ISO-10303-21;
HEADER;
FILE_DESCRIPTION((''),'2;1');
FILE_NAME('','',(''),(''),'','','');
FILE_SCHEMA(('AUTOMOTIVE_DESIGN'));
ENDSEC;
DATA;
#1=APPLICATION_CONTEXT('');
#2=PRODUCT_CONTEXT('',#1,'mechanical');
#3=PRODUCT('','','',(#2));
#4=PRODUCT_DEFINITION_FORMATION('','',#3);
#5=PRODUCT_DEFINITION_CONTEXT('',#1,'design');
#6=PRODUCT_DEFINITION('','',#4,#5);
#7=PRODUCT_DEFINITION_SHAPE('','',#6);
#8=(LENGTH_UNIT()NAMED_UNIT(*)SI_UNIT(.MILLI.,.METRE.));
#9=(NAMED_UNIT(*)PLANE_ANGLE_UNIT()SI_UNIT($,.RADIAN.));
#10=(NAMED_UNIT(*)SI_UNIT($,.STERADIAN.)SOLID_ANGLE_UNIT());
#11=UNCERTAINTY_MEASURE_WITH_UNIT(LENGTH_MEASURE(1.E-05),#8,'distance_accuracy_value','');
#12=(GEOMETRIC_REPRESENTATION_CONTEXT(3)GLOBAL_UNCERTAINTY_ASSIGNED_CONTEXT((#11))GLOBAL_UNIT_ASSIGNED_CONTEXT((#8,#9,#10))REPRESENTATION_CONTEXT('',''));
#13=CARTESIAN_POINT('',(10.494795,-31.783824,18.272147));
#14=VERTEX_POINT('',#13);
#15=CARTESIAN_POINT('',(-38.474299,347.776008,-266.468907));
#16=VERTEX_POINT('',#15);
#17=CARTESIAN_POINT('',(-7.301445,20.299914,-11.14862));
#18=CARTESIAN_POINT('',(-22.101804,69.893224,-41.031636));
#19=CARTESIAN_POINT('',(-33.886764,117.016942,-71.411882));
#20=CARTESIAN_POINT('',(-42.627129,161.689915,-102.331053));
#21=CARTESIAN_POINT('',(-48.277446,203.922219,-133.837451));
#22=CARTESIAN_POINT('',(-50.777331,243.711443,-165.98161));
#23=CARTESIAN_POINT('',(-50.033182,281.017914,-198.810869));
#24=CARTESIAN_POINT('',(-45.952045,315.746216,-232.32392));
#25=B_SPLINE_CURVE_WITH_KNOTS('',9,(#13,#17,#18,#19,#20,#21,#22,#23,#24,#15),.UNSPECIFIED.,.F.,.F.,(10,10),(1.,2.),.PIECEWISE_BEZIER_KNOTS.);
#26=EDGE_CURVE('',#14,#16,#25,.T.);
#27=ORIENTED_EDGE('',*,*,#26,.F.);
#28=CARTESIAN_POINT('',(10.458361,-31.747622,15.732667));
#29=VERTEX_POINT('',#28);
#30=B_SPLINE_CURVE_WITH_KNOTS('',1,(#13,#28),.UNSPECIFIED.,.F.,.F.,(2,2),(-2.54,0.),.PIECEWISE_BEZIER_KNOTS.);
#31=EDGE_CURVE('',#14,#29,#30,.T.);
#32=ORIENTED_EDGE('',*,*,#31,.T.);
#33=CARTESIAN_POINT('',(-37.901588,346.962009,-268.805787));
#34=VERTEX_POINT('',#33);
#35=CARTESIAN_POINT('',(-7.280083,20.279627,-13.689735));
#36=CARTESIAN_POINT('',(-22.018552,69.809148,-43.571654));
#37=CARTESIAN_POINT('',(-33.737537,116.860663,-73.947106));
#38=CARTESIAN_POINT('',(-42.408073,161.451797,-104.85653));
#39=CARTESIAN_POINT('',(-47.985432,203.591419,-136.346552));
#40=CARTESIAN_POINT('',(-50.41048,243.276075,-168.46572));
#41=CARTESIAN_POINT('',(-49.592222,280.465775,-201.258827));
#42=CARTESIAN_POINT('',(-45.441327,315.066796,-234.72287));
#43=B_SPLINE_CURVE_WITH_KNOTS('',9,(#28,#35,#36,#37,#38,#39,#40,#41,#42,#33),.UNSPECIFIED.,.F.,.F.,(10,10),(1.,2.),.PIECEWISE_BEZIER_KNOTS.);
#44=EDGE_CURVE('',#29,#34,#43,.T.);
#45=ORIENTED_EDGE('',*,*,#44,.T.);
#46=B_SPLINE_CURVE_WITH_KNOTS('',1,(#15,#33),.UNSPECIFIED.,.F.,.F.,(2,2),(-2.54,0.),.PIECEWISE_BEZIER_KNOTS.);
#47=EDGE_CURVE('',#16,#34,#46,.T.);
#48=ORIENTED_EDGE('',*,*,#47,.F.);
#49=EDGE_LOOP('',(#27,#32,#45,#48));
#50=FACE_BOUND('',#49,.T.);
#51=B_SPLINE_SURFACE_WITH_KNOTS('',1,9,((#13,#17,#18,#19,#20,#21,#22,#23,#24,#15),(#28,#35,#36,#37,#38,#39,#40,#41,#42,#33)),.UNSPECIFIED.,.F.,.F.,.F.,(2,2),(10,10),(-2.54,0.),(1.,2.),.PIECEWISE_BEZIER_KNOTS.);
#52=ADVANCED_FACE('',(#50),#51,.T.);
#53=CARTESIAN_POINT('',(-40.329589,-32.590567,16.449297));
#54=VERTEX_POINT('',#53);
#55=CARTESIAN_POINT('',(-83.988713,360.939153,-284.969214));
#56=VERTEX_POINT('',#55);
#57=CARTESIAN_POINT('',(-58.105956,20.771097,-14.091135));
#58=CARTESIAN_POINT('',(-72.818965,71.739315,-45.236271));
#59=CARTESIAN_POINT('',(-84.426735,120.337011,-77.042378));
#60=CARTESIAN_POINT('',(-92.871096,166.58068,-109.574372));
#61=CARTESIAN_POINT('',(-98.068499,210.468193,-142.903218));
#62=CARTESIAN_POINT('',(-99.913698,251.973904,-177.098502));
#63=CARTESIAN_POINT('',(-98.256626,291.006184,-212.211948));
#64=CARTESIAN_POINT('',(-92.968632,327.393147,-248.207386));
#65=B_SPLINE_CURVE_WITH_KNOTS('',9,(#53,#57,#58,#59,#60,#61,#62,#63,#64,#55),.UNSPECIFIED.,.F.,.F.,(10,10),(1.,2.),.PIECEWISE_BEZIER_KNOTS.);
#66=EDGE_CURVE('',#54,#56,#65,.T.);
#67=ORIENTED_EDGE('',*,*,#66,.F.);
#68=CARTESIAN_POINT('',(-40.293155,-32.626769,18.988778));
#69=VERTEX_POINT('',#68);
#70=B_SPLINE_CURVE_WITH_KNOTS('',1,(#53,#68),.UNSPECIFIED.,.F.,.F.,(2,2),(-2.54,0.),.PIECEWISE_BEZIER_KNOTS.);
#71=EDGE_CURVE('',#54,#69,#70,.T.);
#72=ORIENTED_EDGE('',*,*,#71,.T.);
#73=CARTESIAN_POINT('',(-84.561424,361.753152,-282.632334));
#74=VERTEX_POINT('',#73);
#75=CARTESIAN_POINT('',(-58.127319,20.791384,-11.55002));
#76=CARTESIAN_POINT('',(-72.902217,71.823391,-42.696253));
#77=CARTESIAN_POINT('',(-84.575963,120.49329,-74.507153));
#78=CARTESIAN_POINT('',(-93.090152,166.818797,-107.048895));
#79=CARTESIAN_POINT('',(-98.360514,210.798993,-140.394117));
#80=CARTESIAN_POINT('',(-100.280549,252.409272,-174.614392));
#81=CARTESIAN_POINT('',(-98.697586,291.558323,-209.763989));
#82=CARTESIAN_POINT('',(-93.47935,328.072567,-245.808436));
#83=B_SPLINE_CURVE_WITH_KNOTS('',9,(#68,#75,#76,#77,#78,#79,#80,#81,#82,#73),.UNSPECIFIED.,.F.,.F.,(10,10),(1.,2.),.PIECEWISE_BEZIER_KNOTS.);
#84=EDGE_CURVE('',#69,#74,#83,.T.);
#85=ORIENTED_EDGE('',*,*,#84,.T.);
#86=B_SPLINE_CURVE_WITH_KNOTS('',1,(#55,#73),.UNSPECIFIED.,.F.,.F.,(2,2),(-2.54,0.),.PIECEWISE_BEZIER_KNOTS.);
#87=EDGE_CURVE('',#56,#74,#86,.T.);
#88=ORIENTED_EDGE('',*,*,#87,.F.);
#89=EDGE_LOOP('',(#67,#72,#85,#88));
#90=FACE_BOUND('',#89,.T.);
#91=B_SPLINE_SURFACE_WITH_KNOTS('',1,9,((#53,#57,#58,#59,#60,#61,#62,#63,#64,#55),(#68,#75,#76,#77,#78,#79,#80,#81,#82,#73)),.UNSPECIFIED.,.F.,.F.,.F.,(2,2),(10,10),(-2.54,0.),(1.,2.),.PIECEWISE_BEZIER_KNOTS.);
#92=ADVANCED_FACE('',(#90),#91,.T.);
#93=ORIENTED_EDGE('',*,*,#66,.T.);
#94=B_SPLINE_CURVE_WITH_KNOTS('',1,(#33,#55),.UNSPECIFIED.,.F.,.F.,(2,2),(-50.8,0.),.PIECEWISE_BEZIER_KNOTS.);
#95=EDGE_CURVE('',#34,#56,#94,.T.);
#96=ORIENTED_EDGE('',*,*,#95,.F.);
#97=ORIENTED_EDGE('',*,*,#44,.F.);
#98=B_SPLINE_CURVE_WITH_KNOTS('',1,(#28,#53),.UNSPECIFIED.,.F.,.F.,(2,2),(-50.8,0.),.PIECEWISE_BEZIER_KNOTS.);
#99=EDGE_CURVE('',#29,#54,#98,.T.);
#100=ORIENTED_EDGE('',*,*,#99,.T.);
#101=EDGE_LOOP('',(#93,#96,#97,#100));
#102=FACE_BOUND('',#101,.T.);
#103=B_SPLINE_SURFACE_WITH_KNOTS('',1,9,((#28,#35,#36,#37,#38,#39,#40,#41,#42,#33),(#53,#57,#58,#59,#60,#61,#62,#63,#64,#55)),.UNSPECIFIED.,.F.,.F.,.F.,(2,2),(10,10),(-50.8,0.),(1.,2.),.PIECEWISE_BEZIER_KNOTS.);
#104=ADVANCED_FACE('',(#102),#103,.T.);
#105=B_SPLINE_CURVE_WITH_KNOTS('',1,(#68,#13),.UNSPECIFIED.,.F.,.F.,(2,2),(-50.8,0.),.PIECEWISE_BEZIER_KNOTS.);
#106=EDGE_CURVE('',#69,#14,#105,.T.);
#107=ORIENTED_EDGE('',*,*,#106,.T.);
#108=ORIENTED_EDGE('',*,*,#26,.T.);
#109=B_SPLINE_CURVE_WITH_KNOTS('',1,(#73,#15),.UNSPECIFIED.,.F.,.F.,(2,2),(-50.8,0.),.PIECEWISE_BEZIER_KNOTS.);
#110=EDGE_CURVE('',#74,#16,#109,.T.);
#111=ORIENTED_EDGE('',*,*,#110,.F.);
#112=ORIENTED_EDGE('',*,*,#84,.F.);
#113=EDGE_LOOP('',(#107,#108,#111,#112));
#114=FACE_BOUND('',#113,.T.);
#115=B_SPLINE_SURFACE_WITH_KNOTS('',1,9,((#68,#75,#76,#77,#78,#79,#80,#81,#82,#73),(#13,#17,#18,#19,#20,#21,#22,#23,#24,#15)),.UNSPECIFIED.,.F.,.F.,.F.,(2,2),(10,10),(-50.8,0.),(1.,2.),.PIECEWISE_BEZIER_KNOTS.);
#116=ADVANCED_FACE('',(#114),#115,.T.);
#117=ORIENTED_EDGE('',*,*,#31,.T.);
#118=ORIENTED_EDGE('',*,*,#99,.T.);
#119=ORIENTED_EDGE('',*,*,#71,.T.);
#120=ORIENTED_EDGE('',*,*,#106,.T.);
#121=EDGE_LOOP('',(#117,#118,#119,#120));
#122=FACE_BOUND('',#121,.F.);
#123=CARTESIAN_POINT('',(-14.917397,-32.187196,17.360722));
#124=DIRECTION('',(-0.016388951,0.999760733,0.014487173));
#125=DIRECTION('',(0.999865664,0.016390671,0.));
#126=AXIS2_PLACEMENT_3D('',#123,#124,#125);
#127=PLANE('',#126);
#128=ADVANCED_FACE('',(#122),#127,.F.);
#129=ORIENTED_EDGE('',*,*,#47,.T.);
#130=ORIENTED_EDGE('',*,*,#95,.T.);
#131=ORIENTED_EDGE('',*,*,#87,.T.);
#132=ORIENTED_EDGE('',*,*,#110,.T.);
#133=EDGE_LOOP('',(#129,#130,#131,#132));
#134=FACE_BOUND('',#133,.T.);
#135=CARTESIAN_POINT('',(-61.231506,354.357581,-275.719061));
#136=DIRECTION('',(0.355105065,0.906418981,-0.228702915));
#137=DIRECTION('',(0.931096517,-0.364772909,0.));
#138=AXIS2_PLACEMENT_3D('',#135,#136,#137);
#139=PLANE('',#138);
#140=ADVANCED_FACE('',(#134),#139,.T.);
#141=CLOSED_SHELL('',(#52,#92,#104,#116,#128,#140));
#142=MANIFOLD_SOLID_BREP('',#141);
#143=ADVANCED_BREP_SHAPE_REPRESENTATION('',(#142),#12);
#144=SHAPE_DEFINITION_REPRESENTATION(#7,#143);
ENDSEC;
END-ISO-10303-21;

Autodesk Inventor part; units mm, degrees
ref_plane "YZ Plane" through (0, 0, 0) normal (1, 0, 0) x (0, 1, 0)
ref_plane "XZ Plane" through (0, 0, 0) normal (0, 1, 0) x (-1, 0, 0)
ref_plane "XY Plane" through (0, 0, 0) normal (0, 0, 1) x (1, 0, 0)
sketch "Sketch1" plane through (0, 0, 0) normal (0, 1, 0) x (-1, 0, 0)
  line L0 (0, 0) -> (50.8, 0)
  line L1 (50.8, 0) -> (50.8, -2.54)
  line L2 (50.8, -2.54) -> (0, -2.54)
  line L3 (0, -2.54) -> (0, 0)
  dimension "d0" = 50.8
  dimension "d1" = 2.54
sketch3d "3D Sketch1"
  spline S0 degree 2 poles (54.0298, -30.4639, -23.5659) (-21.6839, 194.5701, -151.7075) (10.8628, 322.4211, -290.3528) knots 1 1 1 2 2 2
sweep "Sweep1" add profiles "Sketch1" path "3D Sketch1"
properties part number "thirdseatbeltpart"
